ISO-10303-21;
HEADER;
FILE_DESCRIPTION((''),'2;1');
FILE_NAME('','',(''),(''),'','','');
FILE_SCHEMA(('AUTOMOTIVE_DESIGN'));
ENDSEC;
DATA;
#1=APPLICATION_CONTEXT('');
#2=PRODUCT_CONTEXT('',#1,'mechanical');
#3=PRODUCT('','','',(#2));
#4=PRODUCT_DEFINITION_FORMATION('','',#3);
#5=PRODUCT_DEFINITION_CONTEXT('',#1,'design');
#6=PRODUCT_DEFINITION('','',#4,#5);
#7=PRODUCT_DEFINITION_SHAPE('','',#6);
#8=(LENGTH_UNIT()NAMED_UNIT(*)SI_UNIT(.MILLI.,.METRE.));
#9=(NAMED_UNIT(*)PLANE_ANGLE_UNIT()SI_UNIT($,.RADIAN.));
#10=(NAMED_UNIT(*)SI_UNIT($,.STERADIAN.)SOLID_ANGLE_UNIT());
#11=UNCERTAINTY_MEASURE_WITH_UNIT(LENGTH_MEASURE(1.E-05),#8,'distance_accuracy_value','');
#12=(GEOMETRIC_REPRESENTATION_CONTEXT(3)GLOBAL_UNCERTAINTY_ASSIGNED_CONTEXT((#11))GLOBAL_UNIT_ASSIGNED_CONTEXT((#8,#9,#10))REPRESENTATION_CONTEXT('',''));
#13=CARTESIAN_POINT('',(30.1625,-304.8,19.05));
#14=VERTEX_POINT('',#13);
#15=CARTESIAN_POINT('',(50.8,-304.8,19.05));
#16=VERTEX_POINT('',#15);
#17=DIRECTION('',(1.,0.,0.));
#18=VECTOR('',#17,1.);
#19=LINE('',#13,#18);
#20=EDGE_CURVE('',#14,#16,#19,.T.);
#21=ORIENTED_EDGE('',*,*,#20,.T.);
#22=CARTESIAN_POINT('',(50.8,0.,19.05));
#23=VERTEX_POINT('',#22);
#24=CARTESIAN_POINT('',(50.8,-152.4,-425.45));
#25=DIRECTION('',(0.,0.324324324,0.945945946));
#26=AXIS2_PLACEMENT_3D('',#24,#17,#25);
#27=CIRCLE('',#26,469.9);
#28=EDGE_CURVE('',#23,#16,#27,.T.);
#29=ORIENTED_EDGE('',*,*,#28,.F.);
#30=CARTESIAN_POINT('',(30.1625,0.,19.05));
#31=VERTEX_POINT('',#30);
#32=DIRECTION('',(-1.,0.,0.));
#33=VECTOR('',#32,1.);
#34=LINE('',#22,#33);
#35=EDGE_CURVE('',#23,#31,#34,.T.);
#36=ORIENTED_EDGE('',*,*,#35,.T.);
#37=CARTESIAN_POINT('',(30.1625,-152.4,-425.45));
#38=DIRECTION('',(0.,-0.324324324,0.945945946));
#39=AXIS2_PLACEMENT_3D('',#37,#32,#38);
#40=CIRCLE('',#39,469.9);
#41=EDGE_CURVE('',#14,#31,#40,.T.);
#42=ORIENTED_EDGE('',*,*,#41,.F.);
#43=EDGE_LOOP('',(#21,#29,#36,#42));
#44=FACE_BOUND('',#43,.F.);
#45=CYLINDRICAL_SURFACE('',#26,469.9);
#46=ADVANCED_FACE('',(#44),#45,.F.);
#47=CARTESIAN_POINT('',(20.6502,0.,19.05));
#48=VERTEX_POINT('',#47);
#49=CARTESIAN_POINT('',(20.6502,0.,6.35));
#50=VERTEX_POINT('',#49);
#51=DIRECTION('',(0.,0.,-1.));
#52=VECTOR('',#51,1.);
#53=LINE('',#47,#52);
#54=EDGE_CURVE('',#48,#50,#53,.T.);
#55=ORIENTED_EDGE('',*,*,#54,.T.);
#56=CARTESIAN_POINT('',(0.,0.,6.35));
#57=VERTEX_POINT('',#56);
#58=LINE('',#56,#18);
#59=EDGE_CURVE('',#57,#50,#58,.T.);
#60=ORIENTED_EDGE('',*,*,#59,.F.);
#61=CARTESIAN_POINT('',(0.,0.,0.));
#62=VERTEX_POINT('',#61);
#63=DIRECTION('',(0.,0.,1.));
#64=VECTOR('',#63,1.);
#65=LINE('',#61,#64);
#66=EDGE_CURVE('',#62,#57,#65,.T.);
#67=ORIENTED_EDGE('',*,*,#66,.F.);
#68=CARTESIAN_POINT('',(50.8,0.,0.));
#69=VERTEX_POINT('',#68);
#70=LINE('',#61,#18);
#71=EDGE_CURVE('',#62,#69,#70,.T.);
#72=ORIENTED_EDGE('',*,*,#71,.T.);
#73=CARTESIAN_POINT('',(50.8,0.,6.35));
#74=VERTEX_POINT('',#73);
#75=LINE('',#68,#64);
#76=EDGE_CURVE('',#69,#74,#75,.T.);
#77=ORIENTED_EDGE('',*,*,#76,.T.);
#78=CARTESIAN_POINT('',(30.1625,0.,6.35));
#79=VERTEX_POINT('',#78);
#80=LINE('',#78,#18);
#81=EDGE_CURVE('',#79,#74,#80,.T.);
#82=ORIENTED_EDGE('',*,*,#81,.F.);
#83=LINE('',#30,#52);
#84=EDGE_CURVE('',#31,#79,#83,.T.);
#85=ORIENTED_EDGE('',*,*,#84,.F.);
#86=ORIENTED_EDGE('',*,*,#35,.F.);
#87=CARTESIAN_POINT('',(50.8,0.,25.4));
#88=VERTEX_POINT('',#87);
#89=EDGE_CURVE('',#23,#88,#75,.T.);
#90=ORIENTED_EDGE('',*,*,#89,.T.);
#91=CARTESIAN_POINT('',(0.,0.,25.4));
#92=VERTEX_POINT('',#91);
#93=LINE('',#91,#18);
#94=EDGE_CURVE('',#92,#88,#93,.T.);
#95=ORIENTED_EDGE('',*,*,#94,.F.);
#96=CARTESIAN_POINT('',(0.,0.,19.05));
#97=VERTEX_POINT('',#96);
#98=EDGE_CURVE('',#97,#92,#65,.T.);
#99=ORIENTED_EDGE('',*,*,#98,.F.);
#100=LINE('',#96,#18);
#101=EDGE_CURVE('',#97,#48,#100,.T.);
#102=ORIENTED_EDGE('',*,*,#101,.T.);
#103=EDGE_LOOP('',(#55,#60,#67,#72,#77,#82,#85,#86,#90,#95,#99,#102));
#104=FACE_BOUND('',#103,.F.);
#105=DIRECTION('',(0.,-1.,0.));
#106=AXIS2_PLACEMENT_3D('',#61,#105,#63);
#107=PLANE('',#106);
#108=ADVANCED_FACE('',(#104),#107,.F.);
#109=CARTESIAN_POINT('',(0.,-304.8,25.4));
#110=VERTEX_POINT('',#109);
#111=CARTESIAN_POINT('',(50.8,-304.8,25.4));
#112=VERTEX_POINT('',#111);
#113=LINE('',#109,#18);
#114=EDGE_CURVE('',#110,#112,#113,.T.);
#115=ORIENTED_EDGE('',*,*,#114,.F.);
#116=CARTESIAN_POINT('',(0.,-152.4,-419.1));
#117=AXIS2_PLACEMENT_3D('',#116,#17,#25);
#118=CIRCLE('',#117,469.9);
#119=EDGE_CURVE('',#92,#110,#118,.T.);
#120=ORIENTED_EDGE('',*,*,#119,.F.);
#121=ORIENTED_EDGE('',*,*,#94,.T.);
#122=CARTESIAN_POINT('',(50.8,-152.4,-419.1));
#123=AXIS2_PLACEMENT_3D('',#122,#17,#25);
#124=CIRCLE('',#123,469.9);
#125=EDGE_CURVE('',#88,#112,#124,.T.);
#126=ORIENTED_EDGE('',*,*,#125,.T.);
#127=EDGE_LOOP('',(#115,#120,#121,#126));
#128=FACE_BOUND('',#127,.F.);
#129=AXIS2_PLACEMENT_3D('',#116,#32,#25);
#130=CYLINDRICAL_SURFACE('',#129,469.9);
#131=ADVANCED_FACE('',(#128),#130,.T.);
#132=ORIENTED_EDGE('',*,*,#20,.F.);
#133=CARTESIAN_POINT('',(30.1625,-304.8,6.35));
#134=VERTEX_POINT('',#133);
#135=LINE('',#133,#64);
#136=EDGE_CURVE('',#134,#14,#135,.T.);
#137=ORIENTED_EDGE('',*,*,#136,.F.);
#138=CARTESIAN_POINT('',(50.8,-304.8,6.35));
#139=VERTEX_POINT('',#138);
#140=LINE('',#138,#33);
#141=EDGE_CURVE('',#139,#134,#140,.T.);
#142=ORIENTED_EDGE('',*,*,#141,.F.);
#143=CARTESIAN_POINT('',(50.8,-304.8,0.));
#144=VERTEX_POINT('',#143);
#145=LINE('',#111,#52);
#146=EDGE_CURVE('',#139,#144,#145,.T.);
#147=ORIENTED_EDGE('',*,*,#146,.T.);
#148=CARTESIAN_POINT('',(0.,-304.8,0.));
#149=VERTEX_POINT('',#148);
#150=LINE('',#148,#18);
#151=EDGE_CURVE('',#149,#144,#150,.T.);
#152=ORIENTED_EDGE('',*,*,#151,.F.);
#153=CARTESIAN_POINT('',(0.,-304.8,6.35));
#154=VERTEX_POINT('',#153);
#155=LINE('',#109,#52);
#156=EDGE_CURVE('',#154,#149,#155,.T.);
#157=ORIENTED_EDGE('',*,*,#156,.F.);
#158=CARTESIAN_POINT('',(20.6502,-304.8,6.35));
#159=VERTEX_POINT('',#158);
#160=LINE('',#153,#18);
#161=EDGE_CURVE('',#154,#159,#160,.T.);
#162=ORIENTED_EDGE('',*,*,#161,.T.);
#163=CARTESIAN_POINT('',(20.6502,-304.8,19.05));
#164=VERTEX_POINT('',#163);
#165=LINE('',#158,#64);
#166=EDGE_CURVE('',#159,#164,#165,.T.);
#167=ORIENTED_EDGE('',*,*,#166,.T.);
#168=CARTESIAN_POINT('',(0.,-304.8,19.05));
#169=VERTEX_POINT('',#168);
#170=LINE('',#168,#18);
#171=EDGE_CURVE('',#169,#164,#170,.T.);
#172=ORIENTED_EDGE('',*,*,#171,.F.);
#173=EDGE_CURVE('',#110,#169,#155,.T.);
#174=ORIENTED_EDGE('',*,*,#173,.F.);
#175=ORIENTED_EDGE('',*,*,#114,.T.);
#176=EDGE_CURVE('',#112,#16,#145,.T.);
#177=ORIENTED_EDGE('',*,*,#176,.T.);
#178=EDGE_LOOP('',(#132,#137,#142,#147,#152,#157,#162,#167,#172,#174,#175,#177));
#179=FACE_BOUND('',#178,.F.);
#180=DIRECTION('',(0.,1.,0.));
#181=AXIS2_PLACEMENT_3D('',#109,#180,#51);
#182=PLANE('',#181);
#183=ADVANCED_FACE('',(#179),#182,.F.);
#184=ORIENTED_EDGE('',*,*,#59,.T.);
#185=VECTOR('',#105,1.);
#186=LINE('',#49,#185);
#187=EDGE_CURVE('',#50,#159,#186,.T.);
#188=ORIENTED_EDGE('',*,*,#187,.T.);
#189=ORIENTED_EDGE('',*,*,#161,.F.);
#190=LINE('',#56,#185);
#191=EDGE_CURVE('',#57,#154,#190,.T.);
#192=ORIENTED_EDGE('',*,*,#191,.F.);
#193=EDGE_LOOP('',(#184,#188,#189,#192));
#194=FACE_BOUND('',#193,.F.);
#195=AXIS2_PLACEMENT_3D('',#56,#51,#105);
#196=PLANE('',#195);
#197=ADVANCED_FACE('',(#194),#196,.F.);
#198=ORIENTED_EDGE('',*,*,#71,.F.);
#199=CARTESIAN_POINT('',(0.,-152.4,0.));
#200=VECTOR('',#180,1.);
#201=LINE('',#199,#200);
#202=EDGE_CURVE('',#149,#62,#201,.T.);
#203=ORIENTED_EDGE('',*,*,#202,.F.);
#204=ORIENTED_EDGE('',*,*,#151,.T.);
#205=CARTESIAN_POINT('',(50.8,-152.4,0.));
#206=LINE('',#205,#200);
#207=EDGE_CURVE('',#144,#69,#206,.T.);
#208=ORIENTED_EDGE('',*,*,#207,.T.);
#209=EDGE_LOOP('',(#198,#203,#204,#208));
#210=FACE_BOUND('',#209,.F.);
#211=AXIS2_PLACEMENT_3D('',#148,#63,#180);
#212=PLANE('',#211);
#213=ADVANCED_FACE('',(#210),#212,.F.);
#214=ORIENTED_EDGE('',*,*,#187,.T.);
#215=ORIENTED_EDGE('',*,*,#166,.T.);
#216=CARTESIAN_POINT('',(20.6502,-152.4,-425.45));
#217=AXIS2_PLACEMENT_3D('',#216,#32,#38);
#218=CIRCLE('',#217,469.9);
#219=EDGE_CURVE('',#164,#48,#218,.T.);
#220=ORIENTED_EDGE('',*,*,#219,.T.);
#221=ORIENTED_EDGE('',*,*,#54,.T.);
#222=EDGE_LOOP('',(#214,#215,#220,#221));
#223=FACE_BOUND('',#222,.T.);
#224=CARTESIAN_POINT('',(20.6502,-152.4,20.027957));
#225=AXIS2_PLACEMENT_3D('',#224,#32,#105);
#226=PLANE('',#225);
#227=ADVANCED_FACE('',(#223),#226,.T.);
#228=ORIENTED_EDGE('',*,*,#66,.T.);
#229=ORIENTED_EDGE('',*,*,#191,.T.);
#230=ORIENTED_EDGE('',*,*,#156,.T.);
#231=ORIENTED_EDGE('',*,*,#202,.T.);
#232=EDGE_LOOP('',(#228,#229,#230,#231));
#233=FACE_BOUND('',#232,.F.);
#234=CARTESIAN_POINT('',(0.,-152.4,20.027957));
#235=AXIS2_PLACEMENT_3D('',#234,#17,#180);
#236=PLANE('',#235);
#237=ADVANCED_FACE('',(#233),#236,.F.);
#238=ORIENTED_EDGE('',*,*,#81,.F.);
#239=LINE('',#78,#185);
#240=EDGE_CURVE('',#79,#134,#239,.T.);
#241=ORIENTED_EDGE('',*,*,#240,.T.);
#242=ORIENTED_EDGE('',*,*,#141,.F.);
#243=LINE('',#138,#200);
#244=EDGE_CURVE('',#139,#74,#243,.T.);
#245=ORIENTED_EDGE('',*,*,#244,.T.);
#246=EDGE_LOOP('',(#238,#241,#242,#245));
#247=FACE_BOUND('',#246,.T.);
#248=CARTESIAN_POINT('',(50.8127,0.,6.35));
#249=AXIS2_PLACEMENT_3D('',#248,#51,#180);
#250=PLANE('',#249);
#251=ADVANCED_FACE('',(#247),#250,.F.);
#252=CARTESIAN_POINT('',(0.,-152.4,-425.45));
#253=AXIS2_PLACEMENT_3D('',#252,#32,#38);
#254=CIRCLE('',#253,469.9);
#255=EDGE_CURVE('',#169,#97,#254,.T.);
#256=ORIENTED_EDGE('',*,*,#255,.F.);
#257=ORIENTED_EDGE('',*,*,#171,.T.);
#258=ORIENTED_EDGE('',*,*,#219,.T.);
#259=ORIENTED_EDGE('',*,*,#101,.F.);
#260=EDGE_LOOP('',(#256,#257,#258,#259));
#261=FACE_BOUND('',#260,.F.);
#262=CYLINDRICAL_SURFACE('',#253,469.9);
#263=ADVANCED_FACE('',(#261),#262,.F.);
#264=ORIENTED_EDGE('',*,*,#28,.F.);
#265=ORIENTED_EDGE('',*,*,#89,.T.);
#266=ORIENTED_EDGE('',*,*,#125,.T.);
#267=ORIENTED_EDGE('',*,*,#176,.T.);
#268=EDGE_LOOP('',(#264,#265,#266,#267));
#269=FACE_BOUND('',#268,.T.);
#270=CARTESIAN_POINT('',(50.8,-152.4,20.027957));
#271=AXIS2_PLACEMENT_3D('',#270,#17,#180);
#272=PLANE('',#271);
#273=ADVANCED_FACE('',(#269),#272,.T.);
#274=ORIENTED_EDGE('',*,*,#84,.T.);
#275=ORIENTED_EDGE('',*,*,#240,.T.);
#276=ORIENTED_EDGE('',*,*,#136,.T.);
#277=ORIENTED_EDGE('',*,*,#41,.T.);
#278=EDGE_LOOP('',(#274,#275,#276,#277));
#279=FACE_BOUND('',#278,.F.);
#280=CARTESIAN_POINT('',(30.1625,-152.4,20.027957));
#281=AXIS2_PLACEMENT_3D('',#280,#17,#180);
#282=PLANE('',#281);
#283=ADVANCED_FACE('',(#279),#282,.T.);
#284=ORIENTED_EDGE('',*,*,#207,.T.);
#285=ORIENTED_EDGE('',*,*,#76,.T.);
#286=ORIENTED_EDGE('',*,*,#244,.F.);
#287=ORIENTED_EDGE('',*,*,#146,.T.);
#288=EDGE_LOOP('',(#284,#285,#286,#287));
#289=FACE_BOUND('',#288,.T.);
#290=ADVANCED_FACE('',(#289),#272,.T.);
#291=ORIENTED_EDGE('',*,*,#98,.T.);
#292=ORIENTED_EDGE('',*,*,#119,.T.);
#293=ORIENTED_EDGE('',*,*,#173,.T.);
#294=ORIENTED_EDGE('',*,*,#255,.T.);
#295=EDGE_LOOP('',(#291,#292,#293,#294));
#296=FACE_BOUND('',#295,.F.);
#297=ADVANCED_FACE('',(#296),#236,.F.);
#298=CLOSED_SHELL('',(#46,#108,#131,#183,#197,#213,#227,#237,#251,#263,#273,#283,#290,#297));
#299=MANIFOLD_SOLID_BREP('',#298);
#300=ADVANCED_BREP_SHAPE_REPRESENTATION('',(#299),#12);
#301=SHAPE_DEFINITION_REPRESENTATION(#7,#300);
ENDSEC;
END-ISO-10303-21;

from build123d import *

# Parameters (mm, degrees)
F0_W     = 304.8
F0_H     = 6.35
F1_DEPTH = 50.8
F3_DEPTH = 0.8125
F5_DEPTH = 20.6502


# Not quite as in the source:
# - a pattern or mirror of a feature is missing from the dataset's text; its kind, count and spacing are read off the source's solid


with BuildPart() as f1:
    # F0 (on Right) → F1 (new body)
    with BuildSketch(Plane.YZ):
        with BuildLine():
            Line((-304.8, 6.35), (0, 6.35))
            Line((0, 6.35), (0, 19.05))
            ThreePointArc((0, 19.05), (-152.4, 44.45), (-304.8, 19.05))
            Line((-304.8, 19.05), (-304.8, 6.35))
        make_face()
        with BuildLine():
            ThreePointArc((-304.8, 19.05), (-152.4, 44.45), (0, 19.05))
            Line((0, 19.05), (0, 25.4))
            ThreePointArc((0, 25.4), (-152.4, 50.8), (-304.8, 25.4))
            Line((-304.8, 25.4), (-304.8, 19.05))
        make_face()
        with Locations((-152.4, 3.175)):
            Rectangle(F0_W, F0_H)
    extrude(amount=F1_DEPTH)

    # F2 (on face) → F3 (cut)
    with BuildSketch(Plane.YZ.offset(50.8)):
        with BuildLine():
            Line((0, 6.35), (0, 19.05))
            ThreePointArc((0, 19.05), (-152.4, 44.45), (-304.8, 19.05))
            Line((-304.8, 19.05), (-304.8, 6.35))
            Line((-304.8, 6.35), (0, 6.35))
        make_face()
    extrude(amount=-F3_DEPTH, mode=Mode.SUBTRACT)

    # F4 (on face) → F5 (cut)
    with BuildSketch(Plane(origin=(0, 0, 0), x_dir=(0, -1, 0), z_dir=(-1, 0, 0))):
        with BuildLine():
            Line((304.8, 6.35), (304.8, 19.05))
            ThreePointArc((304.8, 19.05), (152.4, 44.45), (0, 19.05))
            Line((0, 19.05), (0, 6.35))
            Line((0, 6.35), (304.8, 6.35))
        make_face()
    f5 = extrude(amount=-F5_DEPTH, mode=Mode.SUBTRACT)

    # F5_copies: F5 across plane
    add(f5.mirror(Plane(origin=(25.40635, 0, 0), x_dir=(0, 0, 1), z_dir=(1, 0, 0))), mode=Mode.SUBTRACT)


solid = f1.part
